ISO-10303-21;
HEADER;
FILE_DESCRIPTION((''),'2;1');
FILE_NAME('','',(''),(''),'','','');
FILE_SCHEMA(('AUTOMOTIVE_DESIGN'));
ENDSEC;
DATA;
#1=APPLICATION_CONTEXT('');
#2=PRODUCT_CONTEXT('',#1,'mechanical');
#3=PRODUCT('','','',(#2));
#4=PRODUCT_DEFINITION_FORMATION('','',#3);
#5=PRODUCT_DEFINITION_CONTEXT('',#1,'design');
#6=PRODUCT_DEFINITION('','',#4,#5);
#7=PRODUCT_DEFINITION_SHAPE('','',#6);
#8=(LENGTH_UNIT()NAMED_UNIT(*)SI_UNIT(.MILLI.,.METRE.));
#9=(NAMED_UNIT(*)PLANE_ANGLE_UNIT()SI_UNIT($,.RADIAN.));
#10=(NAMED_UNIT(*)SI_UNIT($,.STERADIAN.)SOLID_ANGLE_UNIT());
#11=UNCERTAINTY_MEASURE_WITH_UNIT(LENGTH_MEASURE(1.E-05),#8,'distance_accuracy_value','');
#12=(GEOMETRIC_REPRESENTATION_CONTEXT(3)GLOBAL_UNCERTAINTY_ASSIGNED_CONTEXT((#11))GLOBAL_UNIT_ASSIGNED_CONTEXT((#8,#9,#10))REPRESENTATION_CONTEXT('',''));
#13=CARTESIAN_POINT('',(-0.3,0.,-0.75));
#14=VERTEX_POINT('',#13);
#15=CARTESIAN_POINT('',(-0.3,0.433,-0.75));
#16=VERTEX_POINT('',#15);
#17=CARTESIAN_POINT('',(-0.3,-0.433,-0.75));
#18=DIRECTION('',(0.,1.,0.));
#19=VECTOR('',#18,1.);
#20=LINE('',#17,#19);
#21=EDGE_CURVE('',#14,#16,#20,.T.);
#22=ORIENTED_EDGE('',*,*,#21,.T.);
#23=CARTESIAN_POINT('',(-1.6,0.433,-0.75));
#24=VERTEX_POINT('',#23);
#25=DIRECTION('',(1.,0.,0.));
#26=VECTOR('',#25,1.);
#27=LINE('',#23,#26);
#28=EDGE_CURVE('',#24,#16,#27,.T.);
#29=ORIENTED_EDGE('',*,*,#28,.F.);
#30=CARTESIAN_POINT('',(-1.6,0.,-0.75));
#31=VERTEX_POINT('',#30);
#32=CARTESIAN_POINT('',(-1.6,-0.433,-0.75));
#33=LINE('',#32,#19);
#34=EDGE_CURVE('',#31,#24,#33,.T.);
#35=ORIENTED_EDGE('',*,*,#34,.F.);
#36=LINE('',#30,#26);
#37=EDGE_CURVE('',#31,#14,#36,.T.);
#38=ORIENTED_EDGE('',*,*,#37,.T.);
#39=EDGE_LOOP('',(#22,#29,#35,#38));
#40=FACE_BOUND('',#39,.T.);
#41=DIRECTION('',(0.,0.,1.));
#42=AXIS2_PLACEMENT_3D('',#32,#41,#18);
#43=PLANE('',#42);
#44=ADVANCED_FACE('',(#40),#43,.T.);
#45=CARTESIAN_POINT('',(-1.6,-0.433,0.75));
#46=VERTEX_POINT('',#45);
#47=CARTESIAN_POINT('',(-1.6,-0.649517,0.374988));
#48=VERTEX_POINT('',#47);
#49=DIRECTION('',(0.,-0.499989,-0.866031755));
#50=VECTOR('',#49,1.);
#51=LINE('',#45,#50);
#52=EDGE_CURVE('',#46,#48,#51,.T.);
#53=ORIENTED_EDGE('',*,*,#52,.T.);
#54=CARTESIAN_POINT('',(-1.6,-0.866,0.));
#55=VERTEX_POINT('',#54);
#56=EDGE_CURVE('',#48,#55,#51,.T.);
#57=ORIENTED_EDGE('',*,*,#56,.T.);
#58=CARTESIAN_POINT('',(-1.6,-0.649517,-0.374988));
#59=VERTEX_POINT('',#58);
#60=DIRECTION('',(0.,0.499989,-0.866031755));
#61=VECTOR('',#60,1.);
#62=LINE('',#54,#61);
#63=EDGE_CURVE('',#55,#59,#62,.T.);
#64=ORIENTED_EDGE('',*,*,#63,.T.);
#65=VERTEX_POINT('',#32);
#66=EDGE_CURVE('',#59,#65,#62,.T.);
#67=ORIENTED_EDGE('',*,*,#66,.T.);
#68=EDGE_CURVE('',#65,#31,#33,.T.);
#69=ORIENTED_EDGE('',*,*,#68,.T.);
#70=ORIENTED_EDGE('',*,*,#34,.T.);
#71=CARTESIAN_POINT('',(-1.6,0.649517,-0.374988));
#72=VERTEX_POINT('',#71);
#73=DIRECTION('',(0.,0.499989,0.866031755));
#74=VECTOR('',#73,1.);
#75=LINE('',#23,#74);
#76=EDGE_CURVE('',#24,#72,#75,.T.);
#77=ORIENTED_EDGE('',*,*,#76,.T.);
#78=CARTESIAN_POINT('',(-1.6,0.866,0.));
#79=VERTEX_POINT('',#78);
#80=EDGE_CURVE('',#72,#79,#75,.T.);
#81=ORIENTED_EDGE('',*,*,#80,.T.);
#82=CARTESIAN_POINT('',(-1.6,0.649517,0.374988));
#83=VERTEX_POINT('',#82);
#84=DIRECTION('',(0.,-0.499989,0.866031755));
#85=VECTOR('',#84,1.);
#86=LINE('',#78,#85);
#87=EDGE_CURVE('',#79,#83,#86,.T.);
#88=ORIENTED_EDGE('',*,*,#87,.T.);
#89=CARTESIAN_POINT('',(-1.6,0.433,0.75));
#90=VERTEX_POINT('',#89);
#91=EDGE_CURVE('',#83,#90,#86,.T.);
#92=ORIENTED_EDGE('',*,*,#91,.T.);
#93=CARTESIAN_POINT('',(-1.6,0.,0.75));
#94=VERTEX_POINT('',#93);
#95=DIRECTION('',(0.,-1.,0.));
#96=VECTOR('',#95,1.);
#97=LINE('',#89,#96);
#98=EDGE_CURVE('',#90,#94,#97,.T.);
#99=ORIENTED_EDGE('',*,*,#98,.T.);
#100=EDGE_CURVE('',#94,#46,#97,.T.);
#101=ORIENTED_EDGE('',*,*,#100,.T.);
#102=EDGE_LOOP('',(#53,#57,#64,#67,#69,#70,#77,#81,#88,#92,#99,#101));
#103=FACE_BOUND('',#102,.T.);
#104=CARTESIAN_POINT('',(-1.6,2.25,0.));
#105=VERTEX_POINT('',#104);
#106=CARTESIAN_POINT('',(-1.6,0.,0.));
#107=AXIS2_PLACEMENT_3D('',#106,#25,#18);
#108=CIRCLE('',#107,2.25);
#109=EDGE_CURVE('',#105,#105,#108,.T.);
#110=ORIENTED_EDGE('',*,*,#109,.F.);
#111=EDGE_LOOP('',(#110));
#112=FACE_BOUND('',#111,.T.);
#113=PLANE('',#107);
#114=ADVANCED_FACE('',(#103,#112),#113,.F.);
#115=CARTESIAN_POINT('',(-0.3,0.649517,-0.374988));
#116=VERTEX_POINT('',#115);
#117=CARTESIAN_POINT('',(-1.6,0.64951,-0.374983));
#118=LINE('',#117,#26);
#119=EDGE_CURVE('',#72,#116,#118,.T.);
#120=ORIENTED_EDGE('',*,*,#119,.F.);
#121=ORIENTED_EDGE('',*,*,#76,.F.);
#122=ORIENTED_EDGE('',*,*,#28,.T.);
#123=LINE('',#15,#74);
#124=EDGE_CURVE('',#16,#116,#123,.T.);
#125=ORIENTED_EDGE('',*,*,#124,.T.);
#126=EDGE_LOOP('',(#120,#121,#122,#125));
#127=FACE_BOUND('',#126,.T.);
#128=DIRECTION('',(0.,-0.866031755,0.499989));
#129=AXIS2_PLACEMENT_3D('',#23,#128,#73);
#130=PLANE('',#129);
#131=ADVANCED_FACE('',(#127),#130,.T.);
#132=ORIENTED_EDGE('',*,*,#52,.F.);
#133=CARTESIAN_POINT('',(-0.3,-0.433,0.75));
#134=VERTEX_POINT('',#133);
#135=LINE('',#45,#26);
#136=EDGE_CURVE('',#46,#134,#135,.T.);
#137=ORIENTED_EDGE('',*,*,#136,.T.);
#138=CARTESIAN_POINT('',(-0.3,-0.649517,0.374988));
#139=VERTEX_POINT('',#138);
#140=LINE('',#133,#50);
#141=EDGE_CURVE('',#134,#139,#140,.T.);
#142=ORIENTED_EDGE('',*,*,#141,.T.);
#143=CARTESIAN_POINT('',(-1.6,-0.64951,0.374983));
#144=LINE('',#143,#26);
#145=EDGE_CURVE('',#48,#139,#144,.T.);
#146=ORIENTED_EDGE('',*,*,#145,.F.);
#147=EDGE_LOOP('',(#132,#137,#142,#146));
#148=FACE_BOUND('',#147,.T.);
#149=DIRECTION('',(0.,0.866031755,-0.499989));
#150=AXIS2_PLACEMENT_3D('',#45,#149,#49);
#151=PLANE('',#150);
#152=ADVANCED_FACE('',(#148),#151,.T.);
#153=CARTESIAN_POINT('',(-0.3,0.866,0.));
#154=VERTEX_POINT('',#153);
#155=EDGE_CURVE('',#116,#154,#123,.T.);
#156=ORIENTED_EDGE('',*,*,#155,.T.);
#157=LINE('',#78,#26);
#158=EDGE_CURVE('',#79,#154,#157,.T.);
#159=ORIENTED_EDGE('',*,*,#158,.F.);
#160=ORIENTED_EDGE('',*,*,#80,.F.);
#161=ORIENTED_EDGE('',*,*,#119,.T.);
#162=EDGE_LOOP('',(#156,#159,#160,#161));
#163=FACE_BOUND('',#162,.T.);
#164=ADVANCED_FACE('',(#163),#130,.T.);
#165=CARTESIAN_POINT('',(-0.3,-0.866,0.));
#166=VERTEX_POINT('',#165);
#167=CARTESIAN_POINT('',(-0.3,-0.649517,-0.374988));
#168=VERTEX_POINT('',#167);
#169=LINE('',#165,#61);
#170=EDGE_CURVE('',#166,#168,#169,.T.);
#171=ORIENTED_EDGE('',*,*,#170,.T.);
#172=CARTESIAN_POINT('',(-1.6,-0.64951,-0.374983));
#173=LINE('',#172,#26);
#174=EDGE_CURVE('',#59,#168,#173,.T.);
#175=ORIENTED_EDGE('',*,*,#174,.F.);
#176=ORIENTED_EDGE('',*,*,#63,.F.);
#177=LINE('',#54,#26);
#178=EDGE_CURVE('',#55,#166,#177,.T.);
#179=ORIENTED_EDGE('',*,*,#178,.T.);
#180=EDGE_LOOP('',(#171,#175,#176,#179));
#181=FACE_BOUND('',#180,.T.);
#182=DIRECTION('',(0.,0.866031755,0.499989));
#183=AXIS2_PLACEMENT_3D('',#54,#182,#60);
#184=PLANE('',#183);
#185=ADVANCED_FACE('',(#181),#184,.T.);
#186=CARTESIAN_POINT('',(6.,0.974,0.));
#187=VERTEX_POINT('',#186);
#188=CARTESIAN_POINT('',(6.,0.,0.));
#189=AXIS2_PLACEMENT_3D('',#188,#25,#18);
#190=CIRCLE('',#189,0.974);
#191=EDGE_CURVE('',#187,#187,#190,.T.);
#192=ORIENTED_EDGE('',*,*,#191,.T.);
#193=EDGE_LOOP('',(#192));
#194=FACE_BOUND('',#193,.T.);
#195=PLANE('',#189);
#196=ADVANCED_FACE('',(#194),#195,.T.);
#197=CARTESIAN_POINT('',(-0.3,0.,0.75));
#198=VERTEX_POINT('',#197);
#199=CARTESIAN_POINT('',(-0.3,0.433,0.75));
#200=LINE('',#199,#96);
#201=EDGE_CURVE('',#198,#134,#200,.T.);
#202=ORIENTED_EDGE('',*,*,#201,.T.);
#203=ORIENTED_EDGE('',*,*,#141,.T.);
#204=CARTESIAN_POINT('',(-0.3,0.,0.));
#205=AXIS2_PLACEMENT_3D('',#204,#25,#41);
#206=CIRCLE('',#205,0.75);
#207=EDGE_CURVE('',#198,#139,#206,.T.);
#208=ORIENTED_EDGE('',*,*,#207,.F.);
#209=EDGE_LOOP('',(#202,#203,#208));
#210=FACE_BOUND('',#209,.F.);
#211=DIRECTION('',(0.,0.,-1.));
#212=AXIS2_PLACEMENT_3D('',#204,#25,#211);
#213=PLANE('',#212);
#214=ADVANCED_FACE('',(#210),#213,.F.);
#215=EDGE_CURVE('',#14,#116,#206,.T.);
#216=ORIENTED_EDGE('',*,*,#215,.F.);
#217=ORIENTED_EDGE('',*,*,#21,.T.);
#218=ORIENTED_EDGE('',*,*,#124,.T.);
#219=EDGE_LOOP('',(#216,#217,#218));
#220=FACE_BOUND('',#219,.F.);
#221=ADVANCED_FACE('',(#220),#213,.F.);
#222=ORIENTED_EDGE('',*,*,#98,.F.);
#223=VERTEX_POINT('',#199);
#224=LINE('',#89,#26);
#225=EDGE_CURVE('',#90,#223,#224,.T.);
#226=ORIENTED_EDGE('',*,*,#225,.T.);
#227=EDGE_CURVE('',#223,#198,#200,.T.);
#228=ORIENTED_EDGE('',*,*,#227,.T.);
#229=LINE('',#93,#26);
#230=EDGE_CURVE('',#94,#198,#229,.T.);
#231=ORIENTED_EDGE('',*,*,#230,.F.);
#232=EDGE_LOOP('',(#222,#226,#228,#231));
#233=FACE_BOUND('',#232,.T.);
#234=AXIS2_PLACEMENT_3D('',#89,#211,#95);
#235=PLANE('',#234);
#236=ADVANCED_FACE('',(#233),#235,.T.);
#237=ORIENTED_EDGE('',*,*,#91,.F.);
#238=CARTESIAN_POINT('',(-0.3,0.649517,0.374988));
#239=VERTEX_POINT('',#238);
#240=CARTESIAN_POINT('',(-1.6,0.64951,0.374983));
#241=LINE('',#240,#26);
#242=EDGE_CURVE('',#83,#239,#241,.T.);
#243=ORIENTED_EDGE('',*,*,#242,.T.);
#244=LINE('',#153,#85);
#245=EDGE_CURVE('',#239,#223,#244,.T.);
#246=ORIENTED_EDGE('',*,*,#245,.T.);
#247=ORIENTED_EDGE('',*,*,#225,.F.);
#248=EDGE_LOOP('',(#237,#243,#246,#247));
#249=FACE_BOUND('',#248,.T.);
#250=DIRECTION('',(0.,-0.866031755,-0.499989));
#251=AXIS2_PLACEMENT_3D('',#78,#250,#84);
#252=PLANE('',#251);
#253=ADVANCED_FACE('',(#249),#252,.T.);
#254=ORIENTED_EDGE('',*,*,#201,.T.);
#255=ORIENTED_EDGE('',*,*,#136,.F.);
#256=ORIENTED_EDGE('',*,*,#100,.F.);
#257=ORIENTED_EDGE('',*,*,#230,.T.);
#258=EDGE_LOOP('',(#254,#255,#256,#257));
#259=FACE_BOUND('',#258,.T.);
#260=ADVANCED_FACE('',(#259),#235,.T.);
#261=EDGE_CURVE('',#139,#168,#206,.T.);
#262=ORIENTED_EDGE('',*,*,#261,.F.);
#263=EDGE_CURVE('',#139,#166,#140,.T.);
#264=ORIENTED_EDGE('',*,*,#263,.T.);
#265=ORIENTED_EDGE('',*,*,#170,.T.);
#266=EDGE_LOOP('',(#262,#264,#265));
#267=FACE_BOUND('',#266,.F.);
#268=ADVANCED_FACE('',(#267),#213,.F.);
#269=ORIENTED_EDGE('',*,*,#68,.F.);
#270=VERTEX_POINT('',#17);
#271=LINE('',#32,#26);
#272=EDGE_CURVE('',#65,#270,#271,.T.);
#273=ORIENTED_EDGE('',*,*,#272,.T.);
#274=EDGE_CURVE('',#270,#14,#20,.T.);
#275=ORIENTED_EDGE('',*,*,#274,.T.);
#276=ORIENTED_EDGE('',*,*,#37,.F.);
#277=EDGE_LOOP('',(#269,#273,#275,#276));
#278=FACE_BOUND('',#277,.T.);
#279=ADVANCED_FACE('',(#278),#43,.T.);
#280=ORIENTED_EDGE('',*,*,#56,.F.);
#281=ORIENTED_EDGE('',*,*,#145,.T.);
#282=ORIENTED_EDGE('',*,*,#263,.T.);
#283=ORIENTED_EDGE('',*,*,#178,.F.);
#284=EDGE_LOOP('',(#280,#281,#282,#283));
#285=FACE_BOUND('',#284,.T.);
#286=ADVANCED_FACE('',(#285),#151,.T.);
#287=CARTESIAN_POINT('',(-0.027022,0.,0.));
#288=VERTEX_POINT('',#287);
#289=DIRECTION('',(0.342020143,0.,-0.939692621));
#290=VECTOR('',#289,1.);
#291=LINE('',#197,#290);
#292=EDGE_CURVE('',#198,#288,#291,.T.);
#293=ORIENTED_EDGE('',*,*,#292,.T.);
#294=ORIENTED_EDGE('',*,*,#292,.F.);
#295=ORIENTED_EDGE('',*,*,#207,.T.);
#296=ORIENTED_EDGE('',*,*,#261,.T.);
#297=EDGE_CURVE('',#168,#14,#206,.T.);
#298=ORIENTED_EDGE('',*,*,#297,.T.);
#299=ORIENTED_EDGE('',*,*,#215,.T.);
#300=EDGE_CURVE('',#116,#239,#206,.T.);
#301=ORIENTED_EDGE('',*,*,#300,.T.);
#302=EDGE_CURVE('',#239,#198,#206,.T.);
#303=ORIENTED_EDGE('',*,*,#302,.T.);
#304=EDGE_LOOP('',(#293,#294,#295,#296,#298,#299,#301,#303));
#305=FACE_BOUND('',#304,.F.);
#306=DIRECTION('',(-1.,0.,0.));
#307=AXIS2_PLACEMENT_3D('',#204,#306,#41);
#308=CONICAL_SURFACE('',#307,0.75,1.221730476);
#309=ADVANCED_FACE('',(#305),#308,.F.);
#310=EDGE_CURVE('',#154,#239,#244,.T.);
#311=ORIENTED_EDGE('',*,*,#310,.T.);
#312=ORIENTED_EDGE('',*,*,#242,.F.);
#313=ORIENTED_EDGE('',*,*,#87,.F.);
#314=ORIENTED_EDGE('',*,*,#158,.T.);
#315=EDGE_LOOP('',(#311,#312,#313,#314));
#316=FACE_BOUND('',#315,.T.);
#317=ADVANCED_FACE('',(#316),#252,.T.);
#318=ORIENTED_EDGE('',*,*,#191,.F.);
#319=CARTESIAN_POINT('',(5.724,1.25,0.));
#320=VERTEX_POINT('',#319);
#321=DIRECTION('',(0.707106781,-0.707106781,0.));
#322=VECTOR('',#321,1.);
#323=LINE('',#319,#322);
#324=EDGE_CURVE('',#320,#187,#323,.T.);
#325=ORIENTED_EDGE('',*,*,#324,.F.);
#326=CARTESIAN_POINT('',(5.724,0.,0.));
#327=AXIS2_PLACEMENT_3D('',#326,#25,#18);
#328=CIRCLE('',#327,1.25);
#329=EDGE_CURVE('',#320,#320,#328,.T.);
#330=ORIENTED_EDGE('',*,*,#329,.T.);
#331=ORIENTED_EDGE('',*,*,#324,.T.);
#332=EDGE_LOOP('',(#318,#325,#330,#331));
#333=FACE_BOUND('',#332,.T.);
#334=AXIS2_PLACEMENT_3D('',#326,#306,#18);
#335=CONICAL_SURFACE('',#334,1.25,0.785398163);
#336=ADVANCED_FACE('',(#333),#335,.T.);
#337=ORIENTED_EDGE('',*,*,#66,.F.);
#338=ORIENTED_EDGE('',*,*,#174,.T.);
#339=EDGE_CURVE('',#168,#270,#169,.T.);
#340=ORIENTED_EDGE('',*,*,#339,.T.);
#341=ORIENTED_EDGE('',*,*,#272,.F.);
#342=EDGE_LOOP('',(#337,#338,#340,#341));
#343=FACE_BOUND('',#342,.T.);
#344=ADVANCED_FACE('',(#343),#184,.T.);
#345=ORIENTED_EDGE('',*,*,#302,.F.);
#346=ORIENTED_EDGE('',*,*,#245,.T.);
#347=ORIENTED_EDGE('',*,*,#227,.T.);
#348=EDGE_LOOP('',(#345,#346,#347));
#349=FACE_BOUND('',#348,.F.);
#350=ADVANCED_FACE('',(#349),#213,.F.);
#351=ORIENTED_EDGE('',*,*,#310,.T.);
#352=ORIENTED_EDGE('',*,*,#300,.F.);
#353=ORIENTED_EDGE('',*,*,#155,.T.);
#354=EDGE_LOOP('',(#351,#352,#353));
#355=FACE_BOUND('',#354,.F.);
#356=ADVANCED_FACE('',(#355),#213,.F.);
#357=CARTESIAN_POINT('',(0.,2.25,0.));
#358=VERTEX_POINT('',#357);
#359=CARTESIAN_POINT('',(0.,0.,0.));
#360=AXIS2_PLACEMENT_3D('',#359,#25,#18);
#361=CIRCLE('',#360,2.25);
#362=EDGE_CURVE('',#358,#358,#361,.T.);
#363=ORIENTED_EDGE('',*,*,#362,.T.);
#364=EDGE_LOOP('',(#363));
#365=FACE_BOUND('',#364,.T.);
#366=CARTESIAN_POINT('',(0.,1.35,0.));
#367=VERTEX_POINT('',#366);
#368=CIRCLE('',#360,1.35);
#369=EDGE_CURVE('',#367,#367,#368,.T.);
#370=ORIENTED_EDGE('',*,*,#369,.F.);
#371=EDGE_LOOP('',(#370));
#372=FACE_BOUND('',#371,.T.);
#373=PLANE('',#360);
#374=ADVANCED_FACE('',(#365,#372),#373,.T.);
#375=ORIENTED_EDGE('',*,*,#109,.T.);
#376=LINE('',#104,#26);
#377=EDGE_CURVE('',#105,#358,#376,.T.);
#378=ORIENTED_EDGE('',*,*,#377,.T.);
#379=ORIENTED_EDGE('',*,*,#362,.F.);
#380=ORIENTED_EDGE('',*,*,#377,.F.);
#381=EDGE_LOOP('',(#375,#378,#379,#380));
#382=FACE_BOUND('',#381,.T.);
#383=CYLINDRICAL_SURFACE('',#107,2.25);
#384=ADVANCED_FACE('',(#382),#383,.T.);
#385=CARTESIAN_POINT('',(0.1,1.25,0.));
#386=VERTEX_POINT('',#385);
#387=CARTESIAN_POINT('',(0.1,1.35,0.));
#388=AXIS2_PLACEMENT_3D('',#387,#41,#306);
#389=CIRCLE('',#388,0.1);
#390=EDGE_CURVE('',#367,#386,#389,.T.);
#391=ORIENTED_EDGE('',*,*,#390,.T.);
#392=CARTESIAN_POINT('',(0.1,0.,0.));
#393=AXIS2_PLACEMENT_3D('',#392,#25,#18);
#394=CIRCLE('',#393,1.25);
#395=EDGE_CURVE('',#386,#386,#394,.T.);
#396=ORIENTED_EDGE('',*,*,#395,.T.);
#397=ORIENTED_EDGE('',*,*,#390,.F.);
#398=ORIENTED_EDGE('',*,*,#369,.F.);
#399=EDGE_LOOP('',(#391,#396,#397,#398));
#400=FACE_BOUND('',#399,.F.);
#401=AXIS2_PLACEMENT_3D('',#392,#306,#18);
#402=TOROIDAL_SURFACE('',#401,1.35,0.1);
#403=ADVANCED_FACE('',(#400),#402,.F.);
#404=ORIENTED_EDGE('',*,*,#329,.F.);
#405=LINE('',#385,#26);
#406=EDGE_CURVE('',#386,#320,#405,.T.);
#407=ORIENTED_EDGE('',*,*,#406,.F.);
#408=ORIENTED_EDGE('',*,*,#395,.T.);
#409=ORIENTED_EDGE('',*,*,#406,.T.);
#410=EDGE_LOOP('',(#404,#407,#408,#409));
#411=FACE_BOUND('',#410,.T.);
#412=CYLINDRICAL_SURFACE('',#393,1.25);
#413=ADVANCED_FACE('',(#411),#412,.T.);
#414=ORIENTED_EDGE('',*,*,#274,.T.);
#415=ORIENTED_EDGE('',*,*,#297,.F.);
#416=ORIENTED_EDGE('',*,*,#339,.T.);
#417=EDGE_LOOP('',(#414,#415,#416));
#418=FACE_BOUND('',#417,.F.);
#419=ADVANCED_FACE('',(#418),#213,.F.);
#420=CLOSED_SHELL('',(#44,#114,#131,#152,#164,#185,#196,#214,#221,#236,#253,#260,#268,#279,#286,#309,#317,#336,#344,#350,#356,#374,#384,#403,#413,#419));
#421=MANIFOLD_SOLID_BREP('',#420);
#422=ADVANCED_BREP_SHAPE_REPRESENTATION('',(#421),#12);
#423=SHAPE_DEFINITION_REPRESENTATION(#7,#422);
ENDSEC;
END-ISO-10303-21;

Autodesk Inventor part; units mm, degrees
sketch "Sketch_1" plane through (0, 0, 0) normal (0, 0, 1) x (1, 0, 0)
  line L0 (6, 0) -> (-1.6, 0)
  line L1 (-1.6, 0) -> (-1.6, 2.25)
  line L2 (-1.6, 2.25) -> (0, 2.25)
  line L3 (0, 2.25) -> (0, 1.35)
  arc A0 (0, 1.35) -> (0.1, 1.25) centre (0.1, 1.35) ccw
  line L4 (0.1, 1.25) -> (5.724, 1.25)
  line L5 (5.724, 1.25) -> (6, 0.974)
  line L6 (6, 0.974) -> (6, 0)
  line L7 (6, 0) -> (-1.6, 0)
revolve "Revolution1" add sketch "Sketch_1" angle 360 about axis through (6, 0, 0) along (1, 0, 0)
thread "Thread1" size "M2.5x0.45" class "6g" standard "ISO Metric profile" length 5.274
sketch "Sketch2" plane through (-1.6, 0, 0) normal (-1, 0, 0) x (0, 0, 1)
  point P0 (0, 0)
hole "Hole1" at (-1.6, 0, 0) direction (1, 0, 0) diameter 1.5 depth 1.3 tip angle 140
sketch "Sketch_3" plane through (-1.6, 0, 0) normal (1, 0, 0) x (0, 0, -1)
  line L0 (-0.75, -0.433) -> (0, -0.866)
  line L1 (0, -0.866) -> (0.75, -0.433)
  line L2 (0.75, -0.433) -> (0.75, 0.433)
  line L3 (0.75, 0.433) -> (0, 0.866)
  line L4 (0, 0.866) -> (-0.75, 0.433)
  line L5 (-0.75, 0.433) -> (-0.75, -0.433)
extrude "Extrusion1" cut sketch "Sketch_3" along normal blind 1.3
ref_plane "bolt_XY" through (0, 0, 0) normal (1, 0, 0) x (0, 0, -1)
ref_plane "bolt_YZ" through (0, 0, 0) normal (0, 0, -1) x (0, 1, 0)
ref_plane "bolt_ZX" through (0, 0, 0) normal (0, 1, 0) x (1, 0, 0)
ref_plane "bolt_to_nut_XY" through (6, 0, 0) normal (1, 0, 0) x (0, 0, -1)
ref_plane "bolt_to_nut_YZ" through (6, 0, 0) normal (0, 0, -1) x (0, 1, 0)
ref_plane "bolt_to_nut_ZX" through (6, 0, 0) normal (0, 1, 0) x (1, 0, 0)
properties part number "CBSST2_5-6"
